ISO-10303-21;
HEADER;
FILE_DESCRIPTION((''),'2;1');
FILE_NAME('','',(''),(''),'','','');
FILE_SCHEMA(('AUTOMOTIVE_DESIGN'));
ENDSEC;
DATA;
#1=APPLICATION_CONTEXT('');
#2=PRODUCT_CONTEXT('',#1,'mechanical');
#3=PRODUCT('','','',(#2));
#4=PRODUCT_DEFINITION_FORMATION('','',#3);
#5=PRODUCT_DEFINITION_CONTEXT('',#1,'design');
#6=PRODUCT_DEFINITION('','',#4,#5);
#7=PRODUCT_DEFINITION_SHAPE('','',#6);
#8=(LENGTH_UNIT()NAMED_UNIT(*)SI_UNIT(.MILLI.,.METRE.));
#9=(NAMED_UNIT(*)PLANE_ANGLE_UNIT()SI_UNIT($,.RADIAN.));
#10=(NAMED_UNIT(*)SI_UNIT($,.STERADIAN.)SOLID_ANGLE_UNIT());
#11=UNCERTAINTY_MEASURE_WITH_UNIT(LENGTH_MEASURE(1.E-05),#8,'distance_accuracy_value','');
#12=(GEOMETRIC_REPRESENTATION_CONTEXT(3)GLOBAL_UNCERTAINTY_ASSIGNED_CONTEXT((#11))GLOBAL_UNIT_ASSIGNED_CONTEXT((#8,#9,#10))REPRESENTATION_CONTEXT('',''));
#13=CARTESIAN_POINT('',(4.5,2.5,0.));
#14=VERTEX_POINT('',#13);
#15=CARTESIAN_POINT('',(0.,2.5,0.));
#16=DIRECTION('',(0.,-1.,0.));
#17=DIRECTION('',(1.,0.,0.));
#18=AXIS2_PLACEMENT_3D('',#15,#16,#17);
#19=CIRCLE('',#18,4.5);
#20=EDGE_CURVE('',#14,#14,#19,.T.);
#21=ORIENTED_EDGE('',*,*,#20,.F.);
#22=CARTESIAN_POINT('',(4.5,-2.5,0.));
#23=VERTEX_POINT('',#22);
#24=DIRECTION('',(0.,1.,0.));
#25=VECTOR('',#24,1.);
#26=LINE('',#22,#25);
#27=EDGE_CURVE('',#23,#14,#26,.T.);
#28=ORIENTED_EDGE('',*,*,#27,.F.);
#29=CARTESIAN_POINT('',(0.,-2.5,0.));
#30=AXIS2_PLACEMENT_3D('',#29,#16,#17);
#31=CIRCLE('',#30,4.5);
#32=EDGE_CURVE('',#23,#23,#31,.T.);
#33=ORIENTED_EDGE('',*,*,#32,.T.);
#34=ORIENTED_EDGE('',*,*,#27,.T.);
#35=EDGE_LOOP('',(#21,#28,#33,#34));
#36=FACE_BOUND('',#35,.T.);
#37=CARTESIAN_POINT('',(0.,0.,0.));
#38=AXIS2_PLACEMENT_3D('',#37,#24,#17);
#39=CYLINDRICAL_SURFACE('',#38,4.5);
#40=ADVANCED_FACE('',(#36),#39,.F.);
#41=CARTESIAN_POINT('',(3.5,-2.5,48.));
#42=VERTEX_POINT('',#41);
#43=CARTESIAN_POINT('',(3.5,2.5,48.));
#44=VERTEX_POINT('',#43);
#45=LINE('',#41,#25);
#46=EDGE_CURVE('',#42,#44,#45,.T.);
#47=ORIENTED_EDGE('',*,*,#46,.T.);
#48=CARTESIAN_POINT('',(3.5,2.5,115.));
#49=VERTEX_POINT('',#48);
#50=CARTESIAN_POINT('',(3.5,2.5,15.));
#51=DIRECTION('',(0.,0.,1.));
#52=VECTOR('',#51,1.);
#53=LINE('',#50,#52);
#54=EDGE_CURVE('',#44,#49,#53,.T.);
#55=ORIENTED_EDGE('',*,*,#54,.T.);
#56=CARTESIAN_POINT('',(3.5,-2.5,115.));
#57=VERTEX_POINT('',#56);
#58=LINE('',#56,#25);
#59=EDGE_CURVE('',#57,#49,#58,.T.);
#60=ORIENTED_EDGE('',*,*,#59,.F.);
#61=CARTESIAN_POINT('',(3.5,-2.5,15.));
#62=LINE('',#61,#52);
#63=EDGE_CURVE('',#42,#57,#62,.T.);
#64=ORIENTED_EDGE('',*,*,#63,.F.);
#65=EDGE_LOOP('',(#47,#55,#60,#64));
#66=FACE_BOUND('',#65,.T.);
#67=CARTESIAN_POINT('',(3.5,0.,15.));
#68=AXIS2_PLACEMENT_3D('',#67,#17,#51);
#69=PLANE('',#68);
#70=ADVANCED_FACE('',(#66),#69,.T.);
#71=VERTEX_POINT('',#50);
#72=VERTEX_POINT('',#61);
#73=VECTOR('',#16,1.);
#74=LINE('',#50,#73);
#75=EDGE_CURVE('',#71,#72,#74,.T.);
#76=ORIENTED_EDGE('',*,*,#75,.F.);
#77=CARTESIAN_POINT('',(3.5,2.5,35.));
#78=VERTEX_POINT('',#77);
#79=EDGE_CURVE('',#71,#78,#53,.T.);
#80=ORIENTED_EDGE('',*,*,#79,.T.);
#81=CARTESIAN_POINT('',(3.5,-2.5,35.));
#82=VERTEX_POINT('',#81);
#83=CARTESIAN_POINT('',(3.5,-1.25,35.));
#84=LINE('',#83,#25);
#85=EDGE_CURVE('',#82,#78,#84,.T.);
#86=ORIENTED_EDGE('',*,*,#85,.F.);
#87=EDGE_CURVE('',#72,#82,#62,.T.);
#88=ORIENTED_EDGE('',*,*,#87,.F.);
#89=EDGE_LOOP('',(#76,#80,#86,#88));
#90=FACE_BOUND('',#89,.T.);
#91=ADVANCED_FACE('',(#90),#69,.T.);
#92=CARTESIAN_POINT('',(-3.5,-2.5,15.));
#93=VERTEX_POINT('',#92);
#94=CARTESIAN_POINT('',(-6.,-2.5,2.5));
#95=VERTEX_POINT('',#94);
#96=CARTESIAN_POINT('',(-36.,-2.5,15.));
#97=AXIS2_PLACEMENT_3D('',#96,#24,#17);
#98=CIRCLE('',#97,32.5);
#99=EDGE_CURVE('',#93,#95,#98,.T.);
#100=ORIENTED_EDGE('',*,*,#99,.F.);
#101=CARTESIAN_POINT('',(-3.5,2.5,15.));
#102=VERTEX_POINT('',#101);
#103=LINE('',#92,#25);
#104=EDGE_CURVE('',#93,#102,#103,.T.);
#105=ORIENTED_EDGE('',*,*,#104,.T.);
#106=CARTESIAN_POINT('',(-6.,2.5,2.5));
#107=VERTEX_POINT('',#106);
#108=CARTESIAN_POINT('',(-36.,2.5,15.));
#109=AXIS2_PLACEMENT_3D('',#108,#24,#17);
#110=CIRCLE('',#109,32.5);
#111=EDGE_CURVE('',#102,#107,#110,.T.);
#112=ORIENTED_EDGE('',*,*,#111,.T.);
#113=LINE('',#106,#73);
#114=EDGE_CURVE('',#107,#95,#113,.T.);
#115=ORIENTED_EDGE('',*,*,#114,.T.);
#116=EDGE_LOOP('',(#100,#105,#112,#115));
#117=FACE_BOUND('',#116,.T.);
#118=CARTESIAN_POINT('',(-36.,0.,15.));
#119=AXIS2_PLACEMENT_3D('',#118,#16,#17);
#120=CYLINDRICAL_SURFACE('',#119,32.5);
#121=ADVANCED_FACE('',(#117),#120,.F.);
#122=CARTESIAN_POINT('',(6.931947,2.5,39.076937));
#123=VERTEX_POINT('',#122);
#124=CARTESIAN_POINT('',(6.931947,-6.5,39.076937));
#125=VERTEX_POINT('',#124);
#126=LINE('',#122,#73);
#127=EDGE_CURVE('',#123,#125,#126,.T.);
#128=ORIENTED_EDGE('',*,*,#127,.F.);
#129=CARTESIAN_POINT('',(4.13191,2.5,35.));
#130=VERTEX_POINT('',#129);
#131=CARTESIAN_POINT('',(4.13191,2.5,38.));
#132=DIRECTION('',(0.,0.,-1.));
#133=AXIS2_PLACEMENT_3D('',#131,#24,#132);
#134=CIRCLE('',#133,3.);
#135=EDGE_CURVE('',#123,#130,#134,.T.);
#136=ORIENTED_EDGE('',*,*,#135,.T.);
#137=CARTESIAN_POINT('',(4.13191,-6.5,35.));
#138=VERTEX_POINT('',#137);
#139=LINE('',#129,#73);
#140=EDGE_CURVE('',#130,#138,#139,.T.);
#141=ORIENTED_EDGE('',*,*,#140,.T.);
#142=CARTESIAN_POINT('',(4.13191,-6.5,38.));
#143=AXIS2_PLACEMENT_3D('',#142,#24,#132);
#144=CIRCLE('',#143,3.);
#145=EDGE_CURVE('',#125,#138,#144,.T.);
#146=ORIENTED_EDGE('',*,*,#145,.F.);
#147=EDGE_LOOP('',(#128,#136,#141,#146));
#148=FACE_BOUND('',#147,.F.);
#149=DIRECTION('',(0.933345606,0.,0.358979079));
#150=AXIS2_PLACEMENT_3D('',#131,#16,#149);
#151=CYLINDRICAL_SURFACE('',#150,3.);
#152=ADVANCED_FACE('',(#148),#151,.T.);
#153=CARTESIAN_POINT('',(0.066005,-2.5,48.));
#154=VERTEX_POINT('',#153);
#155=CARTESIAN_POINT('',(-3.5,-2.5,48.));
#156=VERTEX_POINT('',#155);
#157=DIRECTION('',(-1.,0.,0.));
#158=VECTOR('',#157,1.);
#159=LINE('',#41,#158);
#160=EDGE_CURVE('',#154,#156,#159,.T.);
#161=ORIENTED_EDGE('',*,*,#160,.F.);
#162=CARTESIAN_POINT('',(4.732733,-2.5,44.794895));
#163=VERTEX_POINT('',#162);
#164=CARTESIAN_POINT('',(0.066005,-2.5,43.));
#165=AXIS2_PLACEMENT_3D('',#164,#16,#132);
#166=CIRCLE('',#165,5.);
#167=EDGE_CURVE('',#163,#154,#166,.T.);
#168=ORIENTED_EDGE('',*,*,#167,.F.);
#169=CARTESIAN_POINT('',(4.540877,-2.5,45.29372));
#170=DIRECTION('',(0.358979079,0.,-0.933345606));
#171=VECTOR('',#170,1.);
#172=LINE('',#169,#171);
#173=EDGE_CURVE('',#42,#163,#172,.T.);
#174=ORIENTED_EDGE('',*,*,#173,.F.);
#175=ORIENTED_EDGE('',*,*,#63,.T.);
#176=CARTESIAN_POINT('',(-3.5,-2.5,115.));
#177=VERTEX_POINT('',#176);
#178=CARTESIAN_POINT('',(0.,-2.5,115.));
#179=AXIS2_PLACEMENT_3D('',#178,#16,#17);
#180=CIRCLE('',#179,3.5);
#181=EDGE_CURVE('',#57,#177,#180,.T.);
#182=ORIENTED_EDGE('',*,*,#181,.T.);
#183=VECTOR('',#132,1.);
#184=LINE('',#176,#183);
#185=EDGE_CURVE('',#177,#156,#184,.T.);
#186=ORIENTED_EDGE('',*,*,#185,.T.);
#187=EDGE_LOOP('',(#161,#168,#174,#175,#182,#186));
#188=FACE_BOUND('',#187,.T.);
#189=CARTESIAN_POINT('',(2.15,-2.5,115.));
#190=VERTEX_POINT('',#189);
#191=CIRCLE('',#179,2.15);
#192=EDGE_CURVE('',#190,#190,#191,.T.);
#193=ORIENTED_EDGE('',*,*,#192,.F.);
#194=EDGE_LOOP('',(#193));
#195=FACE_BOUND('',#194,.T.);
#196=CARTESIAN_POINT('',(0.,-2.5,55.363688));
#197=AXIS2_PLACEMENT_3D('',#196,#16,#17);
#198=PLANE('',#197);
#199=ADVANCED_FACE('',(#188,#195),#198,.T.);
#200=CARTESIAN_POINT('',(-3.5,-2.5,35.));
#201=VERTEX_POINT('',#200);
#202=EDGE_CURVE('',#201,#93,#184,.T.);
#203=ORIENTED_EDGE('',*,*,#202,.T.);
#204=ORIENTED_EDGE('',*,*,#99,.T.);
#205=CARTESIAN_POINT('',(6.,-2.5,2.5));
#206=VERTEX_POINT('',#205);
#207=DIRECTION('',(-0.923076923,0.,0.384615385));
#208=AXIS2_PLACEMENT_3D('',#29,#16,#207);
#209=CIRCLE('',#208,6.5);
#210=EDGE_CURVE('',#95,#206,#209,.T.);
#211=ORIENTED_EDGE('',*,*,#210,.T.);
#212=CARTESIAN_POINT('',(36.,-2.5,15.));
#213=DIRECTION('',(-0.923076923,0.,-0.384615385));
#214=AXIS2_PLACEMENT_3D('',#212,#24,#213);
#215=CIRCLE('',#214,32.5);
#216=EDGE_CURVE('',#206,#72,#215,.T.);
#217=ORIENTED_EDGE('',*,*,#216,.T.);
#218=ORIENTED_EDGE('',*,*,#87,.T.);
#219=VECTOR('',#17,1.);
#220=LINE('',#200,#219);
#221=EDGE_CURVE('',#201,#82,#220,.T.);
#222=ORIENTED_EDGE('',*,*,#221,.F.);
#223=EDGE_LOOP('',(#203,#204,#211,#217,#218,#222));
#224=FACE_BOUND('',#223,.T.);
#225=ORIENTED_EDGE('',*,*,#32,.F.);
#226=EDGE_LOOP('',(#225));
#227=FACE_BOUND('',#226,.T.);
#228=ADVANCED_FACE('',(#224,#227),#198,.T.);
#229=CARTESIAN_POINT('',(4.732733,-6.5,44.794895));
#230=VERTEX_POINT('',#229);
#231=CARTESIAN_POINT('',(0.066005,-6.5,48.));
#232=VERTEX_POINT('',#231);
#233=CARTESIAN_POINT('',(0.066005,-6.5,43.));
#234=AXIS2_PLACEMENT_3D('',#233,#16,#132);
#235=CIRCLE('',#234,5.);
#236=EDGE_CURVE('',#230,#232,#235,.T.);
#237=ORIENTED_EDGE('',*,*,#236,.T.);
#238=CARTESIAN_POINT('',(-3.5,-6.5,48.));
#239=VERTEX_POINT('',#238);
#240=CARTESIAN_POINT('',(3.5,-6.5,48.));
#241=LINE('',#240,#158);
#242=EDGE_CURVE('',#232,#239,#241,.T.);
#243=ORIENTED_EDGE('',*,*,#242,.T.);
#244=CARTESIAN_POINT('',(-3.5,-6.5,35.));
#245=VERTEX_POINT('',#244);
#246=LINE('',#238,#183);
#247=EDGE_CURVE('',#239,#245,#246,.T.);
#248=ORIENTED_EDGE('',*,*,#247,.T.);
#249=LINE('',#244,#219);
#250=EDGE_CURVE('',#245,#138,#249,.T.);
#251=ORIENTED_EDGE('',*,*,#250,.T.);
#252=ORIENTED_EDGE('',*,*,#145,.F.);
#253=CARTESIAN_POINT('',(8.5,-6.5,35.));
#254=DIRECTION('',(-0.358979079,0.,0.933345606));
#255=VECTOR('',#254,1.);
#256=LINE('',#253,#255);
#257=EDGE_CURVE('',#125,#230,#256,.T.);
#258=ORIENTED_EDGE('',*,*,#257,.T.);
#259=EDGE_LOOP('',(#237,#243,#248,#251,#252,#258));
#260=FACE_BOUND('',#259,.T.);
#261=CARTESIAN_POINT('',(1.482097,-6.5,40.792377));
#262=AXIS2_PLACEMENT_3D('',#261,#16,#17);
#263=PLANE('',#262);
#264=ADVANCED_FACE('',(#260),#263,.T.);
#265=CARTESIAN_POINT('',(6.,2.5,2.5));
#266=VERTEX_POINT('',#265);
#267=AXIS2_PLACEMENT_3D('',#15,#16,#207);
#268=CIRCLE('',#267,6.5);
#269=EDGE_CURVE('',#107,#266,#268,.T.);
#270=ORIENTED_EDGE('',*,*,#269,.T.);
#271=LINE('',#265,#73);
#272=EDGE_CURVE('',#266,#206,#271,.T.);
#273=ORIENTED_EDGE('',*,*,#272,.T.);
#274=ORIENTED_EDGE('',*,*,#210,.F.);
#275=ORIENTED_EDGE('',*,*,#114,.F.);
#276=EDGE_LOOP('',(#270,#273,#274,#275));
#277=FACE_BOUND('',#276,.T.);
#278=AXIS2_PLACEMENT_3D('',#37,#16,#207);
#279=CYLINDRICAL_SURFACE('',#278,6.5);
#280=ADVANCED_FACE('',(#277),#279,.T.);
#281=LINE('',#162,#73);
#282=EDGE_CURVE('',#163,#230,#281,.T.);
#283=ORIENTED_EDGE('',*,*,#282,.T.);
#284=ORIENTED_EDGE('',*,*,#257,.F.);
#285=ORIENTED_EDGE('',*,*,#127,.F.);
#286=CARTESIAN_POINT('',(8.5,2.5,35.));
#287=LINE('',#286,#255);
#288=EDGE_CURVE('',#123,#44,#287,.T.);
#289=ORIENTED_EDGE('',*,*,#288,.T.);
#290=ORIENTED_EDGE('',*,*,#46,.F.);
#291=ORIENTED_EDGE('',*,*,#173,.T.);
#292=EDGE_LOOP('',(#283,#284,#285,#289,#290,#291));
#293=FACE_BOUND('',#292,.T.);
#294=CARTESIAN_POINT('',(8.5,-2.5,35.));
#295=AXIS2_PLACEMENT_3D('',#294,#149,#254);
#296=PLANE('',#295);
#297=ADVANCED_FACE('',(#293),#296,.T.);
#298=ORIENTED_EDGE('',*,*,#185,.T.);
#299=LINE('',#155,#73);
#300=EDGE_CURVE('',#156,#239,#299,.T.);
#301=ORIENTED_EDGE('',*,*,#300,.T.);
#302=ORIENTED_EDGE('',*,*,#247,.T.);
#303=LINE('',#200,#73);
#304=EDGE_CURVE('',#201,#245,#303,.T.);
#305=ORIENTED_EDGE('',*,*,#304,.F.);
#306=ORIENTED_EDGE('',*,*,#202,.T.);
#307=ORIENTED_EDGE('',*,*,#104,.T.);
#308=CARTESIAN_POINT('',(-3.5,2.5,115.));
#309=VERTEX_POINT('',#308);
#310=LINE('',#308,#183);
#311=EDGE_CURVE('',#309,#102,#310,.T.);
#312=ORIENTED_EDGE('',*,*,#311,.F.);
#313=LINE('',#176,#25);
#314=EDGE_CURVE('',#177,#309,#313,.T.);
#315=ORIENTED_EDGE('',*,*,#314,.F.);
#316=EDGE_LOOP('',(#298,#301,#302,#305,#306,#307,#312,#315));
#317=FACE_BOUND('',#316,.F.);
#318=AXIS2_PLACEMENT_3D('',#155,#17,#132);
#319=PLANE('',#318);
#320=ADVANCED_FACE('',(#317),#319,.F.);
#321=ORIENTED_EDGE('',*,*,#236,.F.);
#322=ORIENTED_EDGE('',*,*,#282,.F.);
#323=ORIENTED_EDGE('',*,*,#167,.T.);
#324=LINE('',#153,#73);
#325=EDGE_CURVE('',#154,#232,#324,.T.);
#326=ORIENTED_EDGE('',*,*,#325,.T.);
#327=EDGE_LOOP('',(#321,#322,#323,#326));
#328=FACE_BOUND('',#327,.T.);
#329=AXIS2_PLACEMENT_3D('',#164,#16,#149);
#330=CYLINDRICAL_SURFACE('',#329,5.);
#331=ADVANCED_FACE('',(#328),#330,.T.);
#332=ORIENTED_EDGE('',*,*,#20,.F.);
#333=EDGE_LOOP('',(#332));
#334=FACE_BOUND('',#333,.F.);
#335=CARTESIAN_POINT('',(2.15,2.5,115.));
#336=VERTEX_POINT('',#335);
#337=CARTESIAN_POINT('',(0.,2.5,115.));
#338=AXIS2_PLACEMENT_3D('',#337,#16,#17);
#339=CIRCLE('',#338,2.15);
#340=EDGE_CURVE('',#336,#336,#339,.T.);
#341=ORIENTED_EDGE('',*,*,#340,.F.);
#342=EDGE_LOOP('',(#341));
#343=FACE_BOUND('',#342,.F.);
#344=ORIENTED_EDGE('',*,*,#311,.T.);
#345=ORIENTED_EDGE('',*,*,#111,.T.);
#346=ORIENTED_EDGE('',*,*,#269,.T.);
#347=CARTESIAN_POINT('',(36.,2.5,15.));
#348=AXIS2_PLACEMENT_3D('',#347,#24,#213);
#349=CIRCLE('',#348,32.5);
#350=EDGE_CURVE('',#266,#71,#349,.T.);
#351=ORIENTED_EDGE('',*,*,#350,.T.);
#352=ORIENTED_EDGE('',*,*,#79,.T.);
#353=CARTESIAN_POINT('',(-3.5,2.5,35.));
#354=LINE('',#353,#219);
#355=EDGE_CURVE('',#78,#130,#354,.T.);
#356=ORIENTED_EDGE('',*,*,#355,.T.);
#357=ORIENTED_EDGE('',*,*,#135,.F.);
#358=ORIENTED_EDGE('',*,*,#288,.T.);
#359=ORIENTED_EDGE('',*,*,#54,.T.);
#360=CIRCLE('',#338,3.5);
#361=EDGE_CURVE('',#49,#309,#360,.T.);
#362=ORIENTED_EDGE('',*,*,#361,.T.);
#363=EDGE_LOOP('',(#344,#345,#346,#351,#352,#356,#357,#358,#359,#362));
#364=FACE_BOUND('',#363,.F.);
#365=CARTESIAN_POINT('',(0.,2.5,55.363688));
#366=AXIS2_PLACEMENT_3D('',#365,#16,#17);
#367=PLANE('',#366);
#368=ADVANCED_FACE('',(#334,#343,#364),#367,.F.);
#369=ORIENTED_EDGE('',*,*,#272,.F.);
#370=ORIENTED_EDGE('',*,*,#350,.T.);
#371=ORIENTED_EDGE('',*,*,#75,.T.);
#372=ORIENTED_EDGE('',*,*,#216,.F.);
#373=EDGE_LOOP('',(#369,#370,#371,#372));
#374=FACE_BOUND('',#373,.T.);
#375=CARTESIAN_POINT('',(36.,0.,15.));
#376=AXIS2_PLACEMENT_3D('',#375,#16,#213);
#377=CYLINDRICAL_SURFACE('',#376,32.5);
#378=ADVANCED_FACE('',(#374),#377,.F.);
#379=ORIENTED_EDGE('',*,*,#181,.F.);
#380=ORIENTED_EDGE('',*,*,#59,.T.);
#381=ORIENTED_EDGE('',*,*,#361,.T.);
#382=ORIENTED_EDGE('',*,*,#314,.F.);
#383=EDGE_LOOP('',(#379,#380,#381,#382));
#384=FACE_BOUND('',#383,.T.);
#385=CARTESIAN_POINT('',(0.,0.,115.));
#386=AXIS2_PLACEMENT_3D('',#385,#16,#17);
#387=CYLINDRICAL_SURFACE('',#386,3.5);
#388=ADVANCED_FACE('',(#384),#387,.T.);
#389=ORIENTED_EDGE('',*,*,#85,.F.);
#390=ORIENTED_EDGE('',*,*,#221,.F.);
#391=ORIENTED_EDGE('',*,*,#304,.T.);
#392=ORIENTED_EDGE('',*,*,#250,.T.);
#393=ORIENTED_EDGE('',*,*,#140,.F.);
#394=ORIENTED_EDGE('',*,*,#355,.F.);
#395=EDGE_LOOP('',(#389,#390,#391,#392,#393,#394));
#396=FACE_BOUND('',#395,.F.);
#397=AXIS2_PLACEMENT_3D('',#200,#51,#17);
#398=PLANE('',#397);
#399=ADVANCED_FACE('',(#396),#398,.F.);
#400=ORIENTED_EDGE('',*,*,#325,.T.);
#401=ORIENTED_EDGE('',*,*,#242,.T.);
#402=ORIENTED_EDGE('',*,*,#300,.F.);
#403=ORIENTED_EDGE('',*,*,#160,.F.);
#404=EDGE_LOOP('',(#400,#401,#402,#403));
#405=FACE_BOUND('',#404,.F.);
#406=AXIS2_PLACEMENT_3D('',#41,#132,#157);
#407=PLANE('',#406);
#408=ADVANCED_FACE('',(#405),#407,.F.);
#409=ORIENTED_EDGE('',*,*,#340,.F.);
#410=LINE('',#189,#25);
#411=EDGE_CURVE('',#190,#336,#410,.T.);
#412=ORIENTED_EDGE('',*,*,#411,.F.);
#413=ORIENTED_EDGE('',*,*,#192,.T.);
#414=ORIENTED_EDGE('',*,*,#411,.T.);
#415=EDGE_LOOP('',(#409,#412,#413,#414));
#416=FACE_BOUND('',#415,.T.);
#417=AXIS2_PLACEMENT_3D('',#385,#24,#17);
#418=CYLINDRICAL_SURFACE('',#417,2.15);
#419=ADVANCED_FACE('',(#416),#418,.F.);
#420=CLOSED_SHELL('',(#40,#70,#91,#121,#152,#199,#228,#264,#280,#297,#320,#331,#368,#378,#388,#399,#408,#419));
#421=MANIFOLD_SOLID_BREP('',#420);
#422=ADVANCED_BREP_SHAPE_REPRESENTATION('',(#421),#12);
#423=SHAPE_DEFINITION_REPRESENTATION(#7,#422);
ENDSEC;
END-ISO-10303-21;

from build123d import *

# Parameters (mm, degrees)
F0_R          = 4.5
F0_R_2        = 2.15
F1_DEPTH      = 2.5
F3_DEPTH      = 4
F3_DEPTH_BACK = 5
F4_R          = 5
F5_R          = 3


with BuildPart() as f1:
    # F0 (on Front) → F1 (new body, symmetric)
    with BuildSketch(Plane.XZ):
        with BuildLine():
            ThreePointArc((-3.5, 15), (-4.13112804, 8.626225608), (-6, 2.5))
            ThreePointArc((-6, 2.5), (0, -6.5), (6, 2.5))
            ThreePointArc((6, 2.5), (4.13112804, 8.626225608), (3.5, 15))
            Line((3.5, 15), (3.5, 115))
            ThreePointArc((3.5, 115), (0, 118.5), (-3.5, 115))
            Line((-3.5, 115), (-3.5, 15))
        make_face()
        Circle(F0_R, mode=Mode.SUBTRACT)
        with Locations((0, 115)):
            Circle(F0_R_2, mode=Mode.SUBTRACT)
    extrude(amount=F1_DEPTH, both=True)

    # F2 (on face) → F3 (join, two sides)
    with BuildSketch(Plane.XZ.offset(2.5)) as f3_sk:
        Polygon((3.5, 48), (-3.5, 48), (-3.5, 35), (3.5, 35), (8.5, 35), align=None)
    extrude(amount=F3_DEPTH)
    extrude(f3_sk.sketch, amount=-F3_DEPTH_BACK)

    # F4
    f4_edges = [f1.edges().sort_by_distance(p)[0] for p in [
        (3.5, -4.5, 48),
    ]]
    fillet(f4_edges, radius=F4_R)

    # F5
    f5_edges = [f1.edges().sort_by_distance(p)[0] for p in [
        (8.5, -2, 35),
    ]]
    fillet(f5_edges, radius=F5_R)


solid = f1.part
